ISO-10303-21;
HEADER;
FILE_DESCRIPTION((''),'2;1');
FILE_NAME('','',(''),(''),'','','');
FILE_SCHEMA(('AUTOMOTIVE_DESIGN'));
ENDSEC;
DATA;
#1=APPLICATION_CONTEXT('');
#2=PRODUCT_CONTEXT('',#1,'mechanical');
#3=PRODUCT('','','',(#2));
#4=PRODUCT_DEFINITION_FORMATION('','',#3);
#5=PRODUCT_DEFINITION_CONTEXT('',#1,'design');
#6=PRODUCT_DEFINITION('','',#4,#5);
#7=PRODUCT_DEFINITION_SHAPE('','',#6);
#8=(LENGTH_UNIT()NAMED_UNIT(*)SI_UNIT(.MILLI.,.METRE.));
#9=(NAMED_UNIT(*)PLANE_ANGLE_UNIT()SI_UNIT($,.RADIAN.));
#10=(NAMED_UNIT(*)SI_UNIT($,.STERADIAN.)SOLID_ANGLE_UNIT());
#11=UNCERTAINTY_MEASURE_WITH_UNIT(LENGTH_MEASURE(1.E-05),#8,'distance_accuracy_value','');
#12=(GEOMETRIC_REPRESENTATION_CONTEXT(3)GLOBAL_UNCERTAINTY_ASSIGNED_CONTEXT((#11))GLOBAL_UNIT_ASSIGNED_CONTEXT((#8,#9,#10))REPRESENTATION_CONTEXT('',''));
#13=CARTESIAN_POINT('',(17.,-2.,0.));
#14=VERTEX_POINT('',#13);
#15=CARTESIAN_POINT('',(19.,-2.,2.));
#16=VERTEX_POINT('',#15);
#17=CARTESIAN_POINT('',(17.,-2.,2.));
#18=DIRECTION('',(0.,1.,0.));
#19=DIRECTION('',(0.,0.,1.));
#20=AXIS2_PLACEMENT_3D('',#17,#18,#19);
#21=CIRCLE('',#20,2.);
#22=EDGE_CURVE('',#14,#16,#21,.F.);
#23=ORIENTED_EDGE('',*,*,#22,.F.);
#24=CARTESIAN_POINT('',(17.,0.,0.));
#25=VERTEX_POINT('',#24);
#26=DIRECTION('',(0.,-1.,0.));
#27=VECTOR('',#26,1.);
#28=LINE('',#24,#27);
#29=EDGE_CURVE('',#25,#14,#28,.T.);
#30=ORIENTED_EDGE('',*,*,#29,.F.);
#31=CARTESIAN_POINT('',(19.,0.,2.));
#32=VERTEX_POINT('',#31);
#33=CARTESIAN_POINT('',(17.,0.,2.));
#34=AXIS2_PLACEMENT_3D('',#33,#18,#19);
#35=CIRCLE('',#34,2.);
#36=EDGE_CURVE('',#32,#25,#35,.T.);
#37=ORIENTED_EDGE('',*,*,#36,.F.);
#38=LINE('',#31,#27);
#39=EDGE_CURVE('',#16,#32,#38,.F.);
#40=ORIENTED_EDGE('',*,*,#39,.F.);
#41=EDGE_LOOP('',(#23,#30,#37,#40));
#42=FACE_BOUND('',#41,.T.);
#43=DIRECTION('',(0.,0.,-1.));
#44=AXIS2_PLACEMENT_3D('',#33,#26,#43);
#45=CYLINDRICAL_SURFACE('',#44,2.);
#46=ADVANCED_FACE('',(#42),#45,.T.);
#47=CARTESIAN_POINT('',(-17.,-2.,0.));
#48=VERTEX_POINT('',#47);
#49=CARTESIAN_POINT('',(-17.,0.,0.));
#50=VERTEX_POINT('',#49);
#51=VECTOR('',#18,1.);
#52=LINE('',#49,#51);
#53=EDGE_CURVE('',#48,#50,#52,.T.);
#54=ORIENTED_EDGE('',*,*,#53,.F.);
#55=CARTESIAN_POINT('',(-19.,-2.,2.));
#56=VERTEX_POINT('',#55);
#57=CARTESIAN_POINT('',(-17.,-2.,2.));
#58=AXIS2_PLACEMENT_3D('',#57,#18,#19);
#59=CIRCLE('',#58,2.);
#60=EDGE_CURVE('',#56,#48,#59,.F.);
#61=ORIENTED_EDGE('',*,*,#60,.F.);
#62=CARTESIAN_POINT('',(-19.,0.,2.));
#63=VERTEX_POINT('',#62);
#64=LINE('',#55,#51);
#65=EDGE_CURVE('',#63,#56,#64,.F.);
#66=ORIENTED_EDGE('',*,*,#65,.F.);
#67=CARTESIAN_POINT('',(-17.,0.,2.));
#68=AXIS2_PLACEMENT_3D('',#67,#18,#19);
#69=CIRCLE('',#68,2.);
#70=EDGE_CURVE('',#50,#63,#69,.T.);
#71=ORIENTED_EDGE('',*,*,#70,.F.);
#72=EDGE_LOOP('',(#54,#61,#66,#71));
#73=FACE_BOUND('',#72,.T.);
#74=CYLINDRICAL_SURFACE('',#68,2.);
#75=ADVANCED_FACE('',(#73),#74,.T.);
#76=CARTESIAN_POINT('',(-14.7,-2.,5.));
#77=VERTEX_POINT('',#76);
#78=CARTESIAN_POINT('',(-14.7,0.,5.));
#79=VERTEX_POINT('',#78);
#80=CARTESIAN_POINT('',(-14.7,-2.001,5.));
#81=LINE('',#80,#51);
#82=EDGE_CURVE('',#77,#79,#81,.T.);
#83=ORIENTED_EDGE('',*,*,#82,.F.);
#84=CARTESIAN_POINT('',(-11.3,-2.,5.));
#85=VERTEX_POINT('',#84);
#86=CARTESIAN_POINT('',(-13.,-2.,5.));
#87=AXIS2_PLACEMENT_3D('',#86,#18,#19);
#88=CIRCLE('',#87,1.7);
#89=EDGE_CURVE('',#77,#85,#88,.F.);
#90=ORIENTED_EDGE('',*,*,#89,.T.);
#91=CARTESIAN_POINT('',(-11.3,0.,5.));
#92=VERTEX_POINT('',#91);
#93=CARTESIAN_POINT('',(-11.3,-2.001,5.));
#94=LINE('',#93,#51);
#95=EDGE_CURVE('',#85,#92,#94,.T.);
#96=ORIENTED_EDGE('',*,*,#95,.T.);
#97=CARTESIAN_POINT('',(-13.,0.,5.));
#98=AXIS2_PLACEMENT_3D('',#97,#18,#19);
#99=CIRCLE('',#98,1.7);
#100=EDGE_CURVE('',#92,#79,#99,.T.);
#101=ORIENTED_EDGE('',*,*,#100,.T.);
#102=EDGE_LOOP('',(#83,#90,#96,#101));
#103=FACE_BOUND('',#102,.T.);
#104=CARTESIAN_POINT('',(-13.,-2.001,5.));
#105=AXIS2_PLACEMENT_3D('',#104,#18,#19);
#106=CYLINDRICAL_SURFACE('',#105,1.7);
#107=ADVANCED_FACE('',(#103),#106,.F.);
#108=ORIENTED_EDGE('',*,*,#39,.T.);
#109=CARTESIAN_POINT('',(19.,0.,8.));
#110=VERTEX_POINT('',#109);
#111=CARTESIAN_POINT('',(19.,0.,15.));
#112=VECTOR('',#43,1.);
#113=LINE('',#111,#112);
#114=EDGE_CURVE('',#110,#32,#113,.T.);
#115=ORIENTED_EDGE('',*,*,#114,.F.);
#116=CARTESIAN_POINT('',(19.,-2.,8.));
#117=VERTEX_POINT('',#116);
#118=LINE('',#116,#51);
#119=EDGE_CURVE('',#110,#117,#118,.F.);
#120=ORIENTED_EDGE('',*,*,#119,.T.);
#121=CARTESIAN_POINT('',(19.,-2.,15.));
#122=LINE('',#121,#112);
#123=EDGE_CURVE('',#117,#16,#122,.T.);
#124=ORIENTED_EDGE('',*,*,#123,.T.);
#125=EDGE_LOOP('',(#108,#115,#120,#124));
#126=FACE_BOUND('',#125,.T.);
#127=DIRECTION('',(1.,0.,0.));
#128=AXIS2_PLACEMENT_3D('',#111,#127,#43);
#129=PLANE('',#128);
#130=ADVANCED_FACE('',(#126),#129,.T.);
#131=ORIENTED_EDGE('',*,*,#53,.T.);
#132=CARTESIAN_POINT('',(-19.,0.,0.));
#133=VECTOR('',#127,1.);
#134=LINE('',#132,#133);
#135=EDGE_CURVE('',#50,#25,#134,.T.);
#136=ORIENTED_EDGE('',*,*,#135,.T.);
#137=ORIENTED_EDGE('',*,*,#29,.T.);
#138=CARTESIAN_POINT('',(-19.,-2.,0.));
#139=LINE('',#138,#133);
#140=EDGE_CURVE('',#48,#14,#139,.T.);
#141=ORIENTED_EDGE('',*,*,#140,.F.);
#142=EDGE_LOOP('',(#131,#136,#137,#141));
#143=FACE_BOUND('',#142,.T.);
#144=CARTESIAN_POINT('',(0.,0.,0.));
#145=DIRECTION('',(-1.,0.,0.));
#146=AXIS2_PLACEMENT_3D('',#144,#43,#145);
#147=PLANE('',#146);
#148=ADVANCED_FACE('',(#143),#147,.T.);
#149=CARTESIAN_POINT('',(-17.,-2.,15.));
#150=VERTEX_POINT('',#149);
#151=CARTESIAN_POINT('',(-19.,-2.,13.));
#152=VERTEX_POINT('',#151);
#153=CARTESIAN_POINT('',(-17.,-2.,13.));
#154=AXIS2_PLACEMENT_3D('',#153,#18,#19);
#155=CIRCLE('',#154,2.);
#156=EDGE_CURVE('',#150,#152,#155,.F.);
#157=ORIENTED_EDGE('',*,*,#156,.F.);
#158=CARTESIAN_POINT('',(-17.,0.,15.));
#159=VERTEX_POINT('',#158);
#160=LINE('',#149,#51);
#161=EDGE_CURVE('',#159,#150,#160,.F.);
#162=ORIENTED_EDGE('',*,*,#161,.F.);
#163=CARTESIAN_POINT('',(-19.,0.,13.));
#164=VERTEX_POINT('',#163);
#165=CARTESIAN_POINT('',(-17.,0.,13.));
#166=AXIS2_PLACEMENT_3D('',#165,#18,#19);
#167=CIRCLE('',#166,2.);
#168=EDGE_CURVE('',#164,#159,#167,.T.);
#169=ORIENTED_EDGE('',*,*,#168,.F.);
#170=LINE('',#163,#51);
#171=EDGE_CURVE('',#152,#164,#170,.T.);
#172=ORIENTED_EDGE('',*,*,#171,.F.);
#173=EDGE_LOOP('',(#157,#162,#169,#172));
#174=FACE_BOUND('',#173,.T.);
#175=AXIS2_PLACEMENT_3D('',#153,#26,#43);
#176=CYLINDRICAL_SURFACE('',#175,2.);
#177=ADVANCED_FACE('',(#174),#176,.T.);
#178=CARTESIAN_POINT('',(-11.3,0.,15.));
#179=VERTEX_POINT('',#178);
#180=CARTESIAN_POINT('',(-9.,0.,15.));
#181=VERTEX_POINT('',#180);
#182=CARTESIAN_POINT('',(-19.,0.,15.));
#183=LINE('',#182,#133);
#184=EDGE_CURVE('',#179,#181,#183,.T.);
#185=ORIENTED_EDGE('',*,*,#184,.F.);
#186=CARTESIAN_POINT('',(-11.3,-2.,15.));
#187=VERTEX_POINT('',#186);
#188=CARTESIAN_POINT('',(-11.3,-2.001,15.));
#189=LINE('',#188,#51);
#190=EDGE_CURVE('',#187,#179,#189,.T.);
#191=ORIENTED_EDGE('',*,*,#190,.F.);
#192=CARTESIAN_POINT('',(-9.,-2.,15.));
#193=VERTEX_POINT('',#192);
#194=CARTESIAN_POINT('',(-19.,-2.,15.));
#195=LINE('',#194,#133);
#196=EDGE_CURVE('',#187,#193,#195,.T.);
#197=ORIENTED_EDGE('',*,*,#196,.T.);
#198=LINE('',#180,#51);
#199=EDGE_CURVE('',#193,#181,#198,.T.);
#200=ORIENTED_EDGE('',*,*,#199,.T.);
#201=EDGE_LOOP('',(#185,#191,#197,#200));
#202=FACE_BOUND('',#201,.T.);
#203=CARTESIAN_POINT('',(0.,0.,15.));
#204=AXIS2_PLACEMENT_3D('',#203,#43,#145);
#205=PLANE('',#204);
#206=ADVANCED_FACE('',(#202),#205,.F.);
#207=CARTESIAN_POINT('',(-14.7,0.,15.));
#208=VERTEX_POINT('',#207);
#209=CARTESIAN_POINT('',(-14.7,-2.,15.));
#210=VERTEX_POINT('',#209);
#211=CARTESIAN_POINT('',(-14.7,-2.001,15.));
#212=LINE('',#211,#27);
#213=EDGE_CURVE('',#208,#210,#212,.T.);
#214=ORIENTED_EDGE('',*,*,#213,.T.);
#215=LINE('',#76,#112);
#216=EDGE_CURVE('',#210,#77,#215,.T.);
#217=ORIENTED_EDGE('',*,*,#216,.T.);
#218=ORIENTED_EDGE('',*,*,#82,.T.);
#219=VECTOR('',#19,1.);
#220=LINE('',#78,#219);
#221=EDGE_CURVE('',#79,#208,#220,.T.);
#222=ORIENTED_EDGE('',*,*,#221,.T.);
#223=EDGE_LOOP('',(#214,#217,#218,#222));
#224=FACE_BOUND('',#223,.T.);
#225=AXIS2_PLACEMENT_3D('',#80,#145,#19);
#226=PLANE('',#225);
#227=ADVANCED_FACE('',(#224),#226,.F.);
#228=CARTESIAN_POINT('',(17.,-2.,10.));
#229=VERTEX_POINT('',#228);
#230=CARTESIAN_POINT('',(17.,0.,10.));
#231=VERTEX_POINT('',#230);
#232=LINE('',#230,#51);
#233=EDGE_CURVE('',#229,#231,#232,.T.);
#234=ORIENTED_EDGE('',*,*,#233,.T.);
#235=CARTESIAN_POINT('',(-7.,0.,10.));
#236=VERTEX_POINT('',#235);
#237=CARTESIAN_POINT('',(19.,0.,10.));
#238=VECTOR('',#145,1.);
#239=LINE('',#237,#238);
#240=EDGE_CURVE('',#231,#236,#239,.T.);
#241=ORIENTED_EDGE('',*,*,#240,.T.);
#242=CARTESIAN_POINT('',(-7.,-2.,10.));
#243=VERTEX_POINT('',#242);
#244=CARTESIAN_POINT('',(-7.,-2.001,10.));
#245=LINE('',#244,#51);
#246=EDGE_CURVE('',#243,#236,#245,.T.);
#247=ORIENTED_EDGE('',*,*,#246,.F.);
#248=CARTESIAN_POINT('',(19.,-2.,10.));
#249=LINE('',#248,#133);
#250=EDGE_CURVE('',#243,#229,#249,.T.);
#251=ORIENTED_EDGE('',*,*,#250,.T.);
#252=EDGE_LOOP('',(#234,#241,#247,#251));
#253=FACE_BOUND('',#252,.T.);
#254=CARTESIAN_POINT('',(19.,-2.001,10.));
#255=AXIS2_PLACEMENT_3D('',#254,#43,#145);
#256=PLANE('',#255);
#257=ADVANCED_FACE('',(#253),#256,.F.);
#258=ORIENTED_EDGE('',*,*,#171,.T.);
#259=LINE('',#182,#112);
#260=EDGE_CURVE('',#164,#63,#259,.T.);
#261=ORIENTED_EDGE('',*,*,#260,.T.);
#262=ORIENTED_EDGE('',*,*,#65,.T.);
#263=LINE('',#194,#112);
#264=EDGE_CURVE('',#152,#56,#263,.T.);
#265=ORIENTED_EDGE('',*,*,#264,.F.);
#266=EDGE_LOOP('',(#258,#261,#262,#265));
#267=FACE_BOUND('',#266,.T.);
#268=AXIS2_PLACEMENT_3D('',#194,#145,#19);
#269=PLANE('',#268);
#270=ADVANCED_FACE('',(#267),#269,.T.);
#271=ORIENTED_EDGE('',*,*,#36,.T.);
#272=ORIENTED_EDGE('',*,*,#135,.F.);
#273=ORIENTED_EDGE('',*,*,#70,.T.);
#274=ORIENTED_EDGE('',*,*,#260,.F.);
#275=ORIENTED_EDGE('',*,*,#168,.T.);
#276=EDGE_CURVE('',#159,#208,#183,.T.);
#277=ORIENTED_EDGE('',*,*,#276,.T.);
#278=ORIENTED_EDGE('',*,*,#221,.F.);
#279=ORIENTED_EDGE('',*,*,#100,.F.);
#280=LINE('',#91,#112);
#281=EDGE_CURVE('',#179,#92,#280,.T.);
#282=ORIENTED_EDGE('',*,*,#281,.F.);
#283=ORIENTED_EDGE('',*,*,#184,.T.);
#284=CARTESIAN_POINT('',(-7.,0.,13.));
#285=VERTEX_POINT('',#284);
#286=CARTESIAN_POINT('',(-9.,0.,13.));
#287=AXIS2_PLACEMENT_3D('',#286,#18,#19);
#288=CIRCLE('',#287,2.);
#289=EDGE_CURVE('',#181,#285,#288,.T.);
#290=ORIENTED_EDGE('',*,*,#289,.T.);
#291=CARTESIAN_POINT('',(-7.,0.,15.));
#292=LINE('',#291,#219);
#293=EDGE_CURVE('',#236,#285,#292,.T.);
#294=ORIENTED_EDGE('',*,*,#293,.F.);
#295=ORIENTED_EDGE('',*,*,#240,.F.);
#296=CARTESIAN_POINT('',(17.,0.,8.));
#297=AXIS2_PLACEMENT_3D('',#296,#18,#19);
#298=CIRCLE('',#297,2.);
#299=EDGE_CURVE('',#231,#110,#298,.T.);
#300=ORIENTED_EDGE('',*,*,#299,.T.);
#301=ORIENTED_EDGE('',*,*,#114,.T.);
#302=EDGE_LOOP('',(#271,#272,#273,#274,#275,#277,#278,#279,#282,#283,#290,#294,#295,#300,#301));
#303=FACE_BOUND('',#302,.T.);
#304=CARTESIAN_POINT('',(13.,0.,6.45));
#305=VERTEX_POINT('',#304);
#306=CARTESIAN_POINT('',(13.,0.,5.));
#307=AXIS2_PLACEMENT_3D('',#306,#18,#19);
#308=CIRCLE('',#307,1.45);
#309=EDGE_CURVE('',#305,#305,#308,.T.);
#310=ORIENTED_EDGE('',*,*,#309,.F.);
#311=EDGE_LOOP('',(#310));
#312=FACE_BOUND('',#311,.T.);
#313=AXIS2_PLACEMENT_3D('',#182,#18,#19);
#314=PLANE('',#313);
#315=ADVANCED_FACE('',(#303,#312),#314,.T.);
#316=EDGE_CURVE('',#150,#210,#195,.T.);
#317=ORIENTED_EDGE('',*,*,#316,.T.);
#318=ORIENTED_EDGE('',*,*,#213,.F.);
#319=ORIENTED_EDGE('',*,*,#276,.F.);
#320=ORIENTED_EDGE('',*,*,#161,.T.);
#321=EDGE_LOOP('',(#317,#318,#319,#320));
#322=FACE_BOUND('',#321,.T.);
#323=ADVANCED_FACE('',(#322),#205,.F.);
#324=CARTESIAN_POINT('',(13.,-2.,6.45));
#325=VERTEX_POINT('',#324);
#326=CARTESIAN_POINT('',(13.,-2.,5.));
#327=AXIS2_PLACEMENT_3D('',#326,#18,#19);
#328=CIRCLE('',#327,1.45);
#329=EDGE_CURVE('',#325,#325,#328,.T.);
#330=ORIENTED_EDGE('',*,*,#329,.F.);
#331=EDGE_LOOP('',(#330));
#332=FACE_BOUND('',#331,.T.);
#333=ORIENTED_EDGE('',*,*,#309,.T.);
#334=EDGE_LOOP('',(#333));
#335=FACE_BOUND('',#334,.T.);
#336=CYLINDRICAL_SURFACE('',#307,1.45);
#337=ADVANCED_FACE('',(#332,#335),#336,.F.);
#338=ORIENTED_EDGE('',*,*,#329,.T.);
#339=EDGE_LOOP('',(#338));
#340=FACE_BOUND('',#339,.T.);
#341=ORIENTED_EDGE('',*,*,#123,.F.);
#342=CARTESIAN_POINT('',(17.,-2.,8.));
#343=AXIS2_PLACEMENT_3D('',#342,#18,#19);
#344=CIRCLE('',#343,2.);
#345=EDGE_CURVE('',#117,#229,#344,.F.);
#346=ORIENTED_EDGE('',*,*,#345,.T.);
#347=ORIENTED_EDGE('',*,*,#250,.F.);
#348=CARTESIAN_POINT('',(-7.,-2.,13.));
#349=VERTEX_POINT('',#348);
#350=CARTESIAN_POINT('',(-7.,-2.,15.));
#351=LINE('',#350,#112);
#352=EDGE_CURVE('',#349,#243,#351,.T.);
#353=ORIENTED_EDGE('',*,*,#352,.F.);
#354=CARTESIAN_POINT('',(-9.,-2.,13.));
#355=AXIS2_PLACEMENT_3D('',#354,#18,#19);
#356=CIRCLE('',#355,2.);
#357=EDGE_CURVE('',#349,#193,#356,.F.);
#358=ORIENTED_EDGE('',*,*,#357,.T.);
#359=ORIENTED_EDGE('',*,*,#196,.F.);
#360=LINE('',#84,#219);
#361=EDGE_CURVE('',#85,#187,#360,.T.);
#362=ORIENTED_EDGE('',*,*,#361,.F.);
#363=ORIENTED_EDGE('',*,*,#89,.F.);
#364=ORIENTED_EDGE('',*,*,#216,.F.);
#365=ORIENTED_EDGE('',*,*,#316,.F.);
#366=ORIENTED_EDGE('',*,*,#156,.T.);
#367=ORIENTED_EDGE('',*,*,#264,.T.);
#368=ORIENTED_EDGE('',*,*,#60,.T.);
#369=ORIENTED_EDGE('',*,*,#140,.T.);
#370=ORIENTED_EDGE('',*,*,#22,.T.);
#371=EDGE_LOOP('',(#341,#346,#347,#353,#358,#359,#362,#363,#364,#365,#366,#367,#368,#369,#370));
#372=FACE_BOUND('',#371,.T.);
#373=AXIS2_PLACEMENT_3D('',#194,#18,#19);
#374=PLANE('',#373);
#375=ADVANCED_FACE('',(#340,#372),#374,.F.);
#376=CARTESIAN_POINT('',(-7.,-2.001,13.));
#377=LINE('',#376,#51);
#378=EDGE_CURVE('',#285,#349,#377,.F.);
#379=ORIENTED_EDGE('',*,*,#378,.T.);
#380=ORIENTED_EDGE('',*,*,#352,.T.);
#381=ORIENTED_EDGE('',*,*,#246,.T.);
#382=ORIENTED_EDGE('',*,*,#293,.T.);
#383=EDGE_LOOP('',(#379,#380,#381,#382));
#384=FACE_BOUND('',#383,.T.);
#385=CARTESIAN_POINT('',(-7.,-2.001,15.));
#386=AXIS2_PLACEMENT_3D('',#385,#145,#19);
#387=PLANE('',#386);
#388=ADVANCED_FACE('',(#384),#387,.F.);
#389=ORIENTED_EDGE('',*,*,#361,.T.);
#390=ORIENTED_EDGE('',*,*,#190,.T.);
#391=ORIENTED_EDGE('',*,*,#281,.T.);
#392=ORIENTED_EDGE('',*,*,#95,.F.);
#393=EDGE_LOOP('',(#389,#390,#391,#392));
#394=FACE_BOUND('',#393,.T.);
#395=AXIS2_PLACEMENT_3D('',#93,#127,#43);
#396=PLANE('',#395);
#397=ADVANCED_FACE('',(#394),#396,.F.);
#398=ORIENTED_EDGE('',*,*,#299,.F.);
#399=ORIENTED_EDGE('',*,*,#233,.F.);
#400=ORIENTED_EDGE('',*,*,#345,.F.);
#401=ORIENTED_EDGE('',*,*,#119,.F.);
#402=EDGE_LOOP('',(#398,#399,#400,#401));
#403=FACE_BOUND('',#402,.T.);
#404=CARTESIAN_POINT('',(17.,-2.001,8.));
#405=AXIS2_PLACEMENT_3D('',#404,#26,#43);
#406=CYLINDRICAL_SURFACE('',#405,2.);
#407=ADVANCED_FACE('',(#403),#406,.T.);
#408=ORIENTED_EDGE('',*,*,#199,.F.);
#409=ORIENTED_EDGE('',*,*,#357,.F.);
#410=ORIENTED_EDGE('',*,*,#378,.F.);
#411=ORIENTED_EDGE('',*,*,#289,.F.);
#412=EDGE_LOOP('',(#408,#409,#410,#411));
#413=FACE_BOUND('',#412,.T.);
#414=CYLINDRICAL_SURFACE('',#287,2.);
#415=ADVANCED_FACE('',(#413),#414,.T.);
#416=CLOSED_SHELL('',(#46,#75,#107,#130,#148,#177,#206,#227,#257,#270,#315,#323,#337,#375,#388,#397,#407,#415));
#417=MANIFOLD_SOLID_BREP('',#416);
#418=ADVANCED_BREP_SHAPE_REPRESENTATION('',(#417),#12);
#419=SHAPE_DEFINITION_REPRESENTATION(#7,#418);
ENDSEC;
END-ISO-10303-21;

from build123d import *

# Parameters (mm, degrees)
SKETCH_1_W             = 38
SKETCH_1_H             = 2
SM_BASE_FLANGE_1_DEPTH = 15
CUT_EXTRUDE_1_REACH    = 26.29
SKETCH_6_W             = 26
SKETCH_6_H             = 5
HOLE_WIZARD_M2_5_1_D   = 2.9
CUT_EXTRUDE_2_REACH    = 26.29
FILLET_1_R             = 2


# Sheet-metal steps are written as plain solids
with BuildPart() as part:
    # Sketch 1 → ﾍﾞｰｽ-ﾌﾗﾝｼﾞ1 (new body)
    with BuildSketch(Plane.XY):
        with Locations((0, -1)):
            Rectangle(SKETCH_1_W, SKETCH_1_H)
    extrude(amount=SM_BASE_FLANGE_1_DEPTH)

    # ｽｹｯﾁ6 → ｶｯﾄ - 押し出し1 (cut, up to next)
    with BuildSketch(Plane(origin=(0, 0, 0), x_dir=(1, 0, 0), z_dir=(0, 1, 0)), mode=Mode.PRIVATE) as cut_extrude_1_sk1:
        with Locations((6, -12.5)):
            Rectangle(SKETCH_6_W, SKETCH_6_H)
    cut_extrude_1_tool1 = extrude(cut_extrude_1_sk1.sketch, amount=-CUT_EXTRUDE_1_REACH, mode=Mode.PRIVATE) & part.part
    add(cut_extrude_1_tool1.solids().sort_by_distance((6, 0, 12.5))[0], mode=Mode.SUBTRACT)

    # M2.5 すきま穴1 (through all)
    with Locations(Plane(origin=(0, 0, 0), x_dir=(1, 0, 0), z_dir=(0, 1, 0))):
        with Locations((13, -5)):
            Hole(HOLE_WIZARD_M2_5_1_D / 2)

    # ｽｹｯﾁ9 → ｶｯﾄ - 押し出し2 (cut, up to next)
    with BuildSketch(Plane(origin=(0, 0, 0), x_dir=(1, 0, 0), z_dir=(0, 1, 0)), mode=Mode.PRIVATE) as cut_extrude_2_sk1:
        with BuildLine():
            Line((-11.3, -5), (-11.3, -15))
            ThreePointArc((-11.3, -15), (-13, -16.7), (-14.7, -15))
            Line((-14.7, -15), (-14.7, -5))
            ThreePointArc((-14.7, -5), (-13, -3.3), (-11.3, -5))
        make_face()
    cut_extrude_2_tool1 = extrude(cut_extrude_2_sk1.sketch, amount=-CUT_EXTRUDE_2_REACH, mode=Mode.PRIVATE) & part.part
    add(cut_extrude_2_tool1.solids().sort_by_distance((-13, 0, 10))[0], mode=Mode.SUBTRACT)

    # ﾌｨﾚｯﾄ1
    fillet_1_edges = [part.edges().sort_by_distance(p)[0] for p in [
        (-19, -1, 15),
        (19, -1, 10),
        (-7, -1, 15),
        (-19, -1, 0),
        (19, -1, 0),
    ]]
    fillet(fillet_1_edges, radius=FILLET_1_R)


solid = part.part
